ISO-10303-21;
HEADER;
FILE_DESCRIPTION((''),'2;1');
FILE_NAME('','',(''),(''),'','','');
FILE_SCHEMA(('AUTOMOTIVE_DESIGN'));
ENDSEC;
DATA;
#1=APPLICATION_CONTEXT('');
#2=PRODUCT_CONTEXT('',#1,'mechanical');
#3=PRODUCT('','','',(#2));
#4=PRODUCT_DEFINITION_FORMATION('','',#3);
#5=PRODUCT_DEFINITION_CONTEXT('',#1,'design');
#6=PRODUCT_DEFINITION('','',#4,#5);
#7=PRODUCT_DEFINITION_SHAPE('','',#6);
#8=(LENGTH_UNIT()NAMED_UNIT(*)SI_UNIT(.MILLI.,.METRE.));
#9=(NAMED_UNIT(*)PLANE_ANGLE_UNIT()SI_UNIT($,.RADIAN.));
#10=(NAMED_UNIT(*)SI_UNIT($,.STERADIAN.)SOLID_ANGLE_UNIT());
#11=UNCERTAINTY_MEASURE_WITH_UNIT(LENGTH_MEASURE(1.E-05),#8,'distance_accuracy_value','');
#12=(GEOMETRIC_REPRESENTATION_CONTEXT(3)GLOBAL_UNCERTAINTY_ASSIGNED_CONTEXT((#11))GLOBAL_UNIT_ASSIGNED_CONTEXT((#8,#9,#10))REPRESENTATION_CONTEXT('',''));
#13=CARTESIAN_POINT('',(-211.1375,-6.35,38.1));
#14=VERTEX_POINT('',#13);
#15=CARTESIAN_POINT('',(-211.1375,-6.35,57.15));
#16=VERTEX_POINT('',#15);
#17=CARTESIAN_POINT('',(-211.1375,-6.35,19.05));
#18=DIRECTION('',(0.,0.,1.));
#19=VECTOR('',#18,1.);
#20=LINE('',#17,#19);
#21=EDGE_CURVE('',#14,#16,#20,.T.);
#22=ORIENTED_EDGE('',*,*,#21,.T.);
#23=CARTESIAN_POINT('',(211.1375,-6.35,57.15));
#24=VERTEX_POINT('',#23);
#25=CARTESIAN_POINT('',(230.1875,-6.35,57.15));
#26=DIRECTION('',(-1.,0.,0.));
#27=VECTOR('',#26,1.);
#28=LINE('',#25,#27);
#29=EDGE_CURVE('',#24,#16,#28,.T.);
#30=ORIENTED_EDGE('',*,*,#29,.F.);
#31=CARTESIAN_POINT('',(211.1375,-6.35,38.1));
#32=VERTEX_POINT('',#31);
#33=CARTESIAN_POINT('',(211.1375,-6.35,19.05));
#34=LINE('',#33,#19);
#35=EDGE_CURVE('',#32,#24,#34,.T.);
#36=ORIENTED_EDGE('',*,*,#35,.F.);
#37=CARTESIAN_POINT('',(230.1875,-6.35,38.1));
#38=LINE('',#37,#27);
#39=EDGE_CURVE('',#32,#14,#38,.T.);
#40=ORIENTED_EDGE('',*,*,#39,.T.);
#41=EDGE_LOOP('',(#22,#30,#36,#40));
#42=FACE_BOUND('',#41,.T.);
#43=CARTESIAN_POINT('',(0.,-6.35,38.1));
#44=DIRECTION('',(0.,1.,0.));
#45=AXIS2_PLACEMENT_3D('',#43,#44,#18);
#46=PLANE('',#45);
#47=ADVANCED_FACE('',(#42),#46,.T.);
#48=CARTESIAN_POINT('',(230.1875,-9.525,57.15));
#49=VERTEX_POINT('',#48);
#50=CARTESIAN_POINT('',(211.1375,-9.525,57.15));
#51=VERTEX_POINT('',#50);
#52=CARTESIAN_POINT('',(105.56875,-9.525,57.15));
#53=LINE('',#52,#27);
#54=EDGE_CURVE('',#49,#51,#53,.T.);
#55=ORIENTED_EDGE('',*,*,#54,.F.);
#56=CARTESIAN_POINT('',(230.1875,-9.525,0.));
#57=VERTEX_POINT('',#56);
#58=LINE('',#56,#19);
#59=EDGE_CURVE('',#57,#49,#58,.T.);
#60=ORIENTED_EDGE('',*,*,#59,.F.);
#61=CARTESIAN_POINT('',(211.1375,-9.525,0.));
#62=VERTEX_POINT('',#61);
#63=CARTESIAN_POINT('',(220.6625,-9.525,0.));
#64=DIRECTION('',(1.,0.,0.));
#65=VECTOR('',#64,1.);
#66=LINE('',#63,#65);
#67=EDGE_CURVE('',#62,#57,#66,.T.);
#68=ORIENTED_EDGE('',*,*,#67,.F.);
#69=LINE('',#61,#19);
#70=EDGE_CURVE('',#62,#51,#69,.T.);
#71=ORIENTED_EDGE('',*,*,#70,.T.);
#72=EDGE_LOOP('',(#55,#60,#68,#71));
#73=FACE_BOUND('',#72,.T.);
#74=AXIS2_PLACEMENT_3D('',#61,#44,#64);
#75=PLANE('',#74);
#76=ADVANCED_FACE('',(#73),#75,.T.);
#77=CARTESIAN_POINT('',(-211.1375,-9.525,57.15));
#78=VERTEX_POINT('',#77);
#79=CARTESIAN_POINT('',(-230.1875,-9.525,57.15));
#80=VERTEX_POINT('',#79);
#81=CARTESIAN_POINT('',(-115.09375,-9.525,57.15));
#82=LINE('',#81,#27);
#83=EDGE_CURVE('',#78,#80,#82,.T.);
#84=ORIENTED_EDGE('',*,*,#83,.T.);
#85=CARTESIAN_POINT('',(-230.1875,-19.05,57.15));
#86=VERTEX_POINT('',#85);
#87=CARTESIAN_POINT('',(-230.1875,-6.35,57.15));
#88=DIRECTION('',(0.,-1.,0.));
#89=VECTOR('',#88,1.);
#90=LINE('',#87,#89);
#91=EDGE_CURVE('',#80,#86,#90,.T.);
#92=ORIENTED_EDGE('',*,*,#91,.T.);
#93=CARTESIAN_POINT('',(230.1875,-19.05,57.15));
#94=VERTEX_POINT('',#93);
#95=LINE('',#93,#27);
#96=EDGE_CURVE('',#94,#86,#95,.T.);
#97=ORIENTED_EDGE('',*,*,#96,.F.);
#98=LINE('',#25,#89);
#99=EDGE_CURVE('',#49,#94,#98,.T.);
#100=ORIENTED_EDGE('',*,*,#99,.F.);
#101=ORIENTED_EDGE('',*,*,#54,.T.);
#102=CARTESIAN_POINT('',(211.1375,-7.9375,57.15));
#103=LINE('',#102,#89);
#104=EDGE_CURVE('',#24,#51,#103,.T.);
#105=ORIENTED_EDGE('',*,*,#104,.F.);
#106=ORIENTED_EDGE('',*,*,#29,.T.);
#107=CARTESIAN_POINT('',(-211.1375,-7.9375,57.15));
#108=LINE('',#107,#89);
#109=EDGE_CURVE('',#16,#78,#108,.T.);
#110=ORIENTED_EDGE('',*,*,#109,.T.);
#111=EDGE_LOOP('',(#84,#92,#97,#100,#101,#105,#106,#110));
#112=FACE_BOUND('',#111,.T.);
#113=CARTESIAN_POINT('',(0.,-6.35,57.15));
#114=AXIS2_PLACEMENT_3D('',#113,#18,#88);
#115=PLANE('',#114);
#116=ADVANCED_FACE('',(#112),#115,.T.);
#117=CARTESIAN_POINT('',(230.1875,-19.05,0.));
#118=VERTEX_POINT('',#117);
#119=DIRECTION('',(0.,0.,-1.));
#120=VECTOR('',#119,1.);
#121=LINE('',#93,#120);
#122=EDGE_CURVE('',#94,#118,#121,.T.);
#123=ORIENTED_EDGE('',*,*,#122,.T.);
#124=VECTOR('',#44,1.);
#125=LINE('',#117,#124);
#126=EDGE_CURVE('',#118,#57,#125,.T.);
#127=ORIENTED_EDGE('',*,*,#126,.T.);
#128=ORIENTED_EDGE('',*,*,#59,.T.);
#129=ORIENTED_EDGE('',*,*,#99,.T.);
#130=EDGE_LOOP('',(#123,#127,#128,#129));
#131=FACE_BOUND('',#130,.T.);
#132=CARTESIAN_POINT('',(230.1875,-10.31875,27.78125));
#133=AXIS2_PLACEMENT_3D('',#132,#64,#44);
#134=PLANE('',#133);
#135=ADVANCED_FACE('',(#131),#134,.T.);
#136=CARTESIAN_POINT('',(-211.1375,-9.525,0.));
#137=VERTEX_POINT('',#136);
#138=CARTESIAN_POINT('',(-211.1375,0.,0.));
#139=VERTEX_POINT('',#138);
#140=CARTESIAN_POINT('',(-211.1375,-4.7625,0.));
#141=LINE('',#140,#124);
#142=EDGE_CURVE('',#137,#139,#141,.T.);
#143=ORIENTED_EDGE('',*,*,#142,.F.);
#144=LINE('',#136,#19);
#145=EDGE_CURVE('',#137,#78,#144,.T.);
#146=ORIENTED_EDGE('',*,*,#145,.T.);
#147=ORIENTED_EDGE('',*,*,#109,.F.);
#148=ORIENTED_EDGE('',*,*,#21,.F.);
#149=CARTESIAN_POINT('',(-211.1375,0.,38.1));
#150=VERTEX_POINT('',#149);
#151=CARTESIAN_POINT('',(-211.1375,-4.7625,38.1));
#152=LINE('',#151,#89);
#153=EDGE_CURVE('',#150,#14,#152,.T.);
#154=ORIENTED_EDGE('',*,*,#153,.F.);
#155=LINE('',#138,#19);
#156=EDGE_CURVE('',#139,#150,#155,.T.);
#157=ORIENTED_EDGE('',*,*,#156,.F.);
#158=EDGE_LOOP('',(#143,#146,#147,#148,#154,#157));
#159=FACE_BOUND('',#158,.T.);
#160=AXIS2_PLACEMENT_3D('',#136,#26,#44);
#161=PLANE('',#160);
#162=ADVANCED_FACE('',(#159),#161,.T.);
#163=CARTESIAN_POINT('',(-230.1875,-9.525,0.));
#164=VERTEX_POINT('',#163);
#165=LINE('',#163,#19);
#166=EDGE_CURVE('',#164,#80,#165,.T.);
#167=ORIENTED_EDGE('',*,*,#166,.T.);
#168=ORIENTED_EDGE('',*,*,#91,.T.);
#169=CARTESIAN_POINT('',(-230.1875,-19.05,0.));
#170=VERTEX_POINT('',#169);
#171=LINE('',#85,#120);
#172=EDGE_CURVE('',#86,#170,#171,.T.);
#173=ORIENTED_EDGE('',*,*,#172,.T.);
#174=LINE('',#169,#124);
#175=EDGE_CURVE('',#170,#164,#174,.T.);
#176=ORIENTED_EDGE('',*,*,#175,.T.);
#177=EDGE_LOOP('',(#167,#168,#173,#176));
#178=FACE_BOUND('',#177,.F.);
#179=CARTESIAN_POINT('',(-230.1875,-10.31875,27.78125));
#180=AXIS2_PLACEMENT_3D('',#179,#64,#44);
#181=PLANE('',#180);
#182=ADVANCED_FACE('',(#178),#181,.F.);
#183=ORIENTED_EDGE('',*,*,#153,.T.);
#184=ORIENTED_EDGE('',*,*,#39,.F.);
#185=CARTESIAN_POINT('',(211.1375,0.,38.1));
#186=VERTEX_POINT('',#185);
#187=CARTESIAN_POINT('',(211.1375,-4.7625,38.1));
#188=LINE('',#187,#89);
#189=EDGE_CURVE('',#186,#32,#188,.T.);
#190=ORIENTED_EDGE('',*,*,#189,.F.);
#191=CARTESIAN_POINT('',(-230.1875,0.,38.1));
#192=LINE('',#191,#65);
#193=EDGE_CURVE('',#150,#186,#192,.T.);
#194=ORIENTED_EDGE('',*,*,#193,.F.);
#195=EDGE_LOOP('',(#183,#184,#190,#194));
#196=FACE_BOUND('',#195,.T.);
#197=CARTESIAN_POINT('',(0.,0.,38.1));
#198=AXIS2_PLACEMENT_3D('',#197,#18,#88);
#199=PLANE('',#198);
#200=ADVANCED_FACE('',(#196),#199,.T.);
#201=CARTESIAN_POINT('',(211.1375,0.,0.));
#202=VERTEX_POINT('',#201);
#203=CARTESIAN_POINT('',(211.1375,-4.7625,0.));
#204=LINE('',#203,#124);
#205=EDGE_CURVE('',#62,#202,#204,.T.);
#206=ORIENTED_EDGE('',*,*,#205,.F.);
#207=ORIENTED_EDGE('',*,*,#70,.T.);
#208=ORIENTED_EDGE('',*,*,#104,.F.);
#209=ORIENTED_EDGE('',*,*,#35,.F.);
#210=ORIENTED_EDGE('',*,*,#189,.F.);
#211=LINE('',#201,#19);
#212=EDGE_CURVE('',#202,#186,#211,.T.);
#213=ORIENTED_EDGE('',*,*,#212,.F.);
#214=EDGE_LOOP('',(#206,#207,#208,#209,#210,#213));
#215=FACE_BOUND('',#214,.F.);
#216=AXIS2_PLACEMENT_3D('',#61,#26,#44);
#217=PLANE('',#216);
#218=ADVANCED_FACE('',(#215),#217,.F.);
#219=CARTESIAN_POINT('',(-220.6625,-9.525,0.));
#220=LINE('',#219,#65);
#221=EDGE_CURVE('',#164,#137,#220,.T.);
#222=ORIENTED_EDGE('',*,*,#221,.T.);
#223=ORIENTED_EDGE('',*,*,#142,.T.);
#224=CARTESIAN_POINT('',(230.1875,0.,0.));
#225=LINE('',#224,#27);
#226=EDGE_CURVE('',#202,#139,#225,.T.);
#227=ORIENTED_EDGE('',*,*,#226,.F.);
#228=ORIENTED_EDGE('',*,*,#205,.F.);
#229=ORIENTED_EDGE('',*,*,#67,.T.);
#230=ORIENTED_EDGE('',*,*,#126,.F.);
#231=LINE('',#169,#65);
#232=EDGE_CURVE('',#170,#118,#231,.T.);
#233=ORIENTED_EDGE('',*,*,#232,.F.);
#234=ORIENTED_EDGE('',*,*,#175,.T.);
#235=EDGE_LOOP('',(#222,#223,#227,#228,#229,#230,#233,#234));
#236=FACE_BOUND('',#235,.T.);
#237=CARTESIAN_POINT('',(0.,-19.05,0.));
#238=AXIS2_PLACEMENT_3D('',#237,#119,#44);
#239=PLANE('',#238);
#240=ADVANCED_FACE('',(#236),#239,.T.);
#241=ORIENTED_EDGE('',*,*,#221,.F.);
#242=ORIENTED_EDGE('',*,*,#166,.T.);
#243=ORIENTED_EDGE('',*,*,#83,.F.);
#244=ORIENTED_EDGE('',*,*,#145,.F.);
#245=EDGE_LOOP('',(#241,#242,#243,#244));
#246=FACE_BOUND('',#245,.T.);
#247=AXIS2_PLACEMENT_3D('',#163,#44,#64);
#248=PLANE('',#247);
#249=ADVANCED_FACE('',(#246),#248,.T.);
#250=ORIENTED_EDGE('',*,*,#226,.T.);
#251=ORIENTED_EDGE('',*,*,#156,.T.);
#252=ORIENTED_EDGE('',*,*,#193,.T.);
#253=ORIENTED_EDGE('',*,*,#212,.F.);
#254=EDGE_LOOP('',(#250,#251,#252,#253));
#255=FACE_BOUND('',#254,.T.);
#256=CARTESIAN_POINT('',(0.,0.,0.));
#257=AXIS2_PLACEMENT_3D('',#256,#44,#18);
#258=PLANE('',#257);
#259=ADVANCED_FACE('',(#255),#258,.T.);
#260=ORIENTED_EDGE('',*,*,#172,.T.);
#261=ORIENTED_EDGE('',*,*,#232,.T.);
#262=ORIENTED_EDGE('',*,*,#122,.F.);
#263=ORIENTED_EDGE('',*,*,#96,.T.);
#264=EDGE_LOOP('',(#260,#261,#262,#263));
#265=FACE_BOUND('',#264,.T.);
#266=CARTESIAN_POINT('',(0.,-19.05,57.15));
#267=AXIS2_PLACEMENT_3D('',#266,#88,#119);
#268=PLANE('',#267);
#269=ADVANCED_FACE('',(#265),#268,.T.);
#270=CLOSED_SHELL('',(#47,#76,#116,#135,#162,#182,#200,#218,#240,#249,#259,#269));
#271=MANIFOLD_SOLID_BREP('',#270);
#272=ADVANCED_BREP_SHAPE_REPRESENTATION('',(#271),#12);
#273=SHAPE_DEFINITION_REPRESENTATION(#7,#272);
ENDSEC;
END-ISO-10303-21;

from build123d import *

# Parameters (mm, degrees)
F1_DEPTH      = 230.1875
F2_W          = 19.05
F2_H          = 9.525
F3_DEPTH      = 493
F3_DEPTH_BACK = 57.151


# Not quite as in the source:
# - an extrude ends at something that could not be found from the text; its depth is read off the source's solid


with BuildPart() as f1:
    # F0 (on Right) → F1 (new body, symmetric)
    with BuildSketch(Plane.YZ):
        Polygon((-19.05, 57.15), (-19.05, 0), (0, 0), (0, 38.1), (-6.35, 38.1), (-6.35, 57.15), align=None)
    extrude(amount=F1_DEPTH, both=True)

    # F2 (on Top) → F3 (cut, two sides)
    with BuildSketch(Plane.XY) as f3_sk:
        with Locations((220.6625, -4.7625)):
            Rectangle(F2_W, F2_H)
        with Locations((-220.6625, -4.7625)):
            Rectangle(F2_W, F2_H)
    extrude(amount=-F3_DEPTH, mode=Mode.SUBTRACT)
    extrude(f3_sk.sketch, amount=F3_DEPTH_BACK, mode=Mode.SUBTRACT)


solid = f1.part
